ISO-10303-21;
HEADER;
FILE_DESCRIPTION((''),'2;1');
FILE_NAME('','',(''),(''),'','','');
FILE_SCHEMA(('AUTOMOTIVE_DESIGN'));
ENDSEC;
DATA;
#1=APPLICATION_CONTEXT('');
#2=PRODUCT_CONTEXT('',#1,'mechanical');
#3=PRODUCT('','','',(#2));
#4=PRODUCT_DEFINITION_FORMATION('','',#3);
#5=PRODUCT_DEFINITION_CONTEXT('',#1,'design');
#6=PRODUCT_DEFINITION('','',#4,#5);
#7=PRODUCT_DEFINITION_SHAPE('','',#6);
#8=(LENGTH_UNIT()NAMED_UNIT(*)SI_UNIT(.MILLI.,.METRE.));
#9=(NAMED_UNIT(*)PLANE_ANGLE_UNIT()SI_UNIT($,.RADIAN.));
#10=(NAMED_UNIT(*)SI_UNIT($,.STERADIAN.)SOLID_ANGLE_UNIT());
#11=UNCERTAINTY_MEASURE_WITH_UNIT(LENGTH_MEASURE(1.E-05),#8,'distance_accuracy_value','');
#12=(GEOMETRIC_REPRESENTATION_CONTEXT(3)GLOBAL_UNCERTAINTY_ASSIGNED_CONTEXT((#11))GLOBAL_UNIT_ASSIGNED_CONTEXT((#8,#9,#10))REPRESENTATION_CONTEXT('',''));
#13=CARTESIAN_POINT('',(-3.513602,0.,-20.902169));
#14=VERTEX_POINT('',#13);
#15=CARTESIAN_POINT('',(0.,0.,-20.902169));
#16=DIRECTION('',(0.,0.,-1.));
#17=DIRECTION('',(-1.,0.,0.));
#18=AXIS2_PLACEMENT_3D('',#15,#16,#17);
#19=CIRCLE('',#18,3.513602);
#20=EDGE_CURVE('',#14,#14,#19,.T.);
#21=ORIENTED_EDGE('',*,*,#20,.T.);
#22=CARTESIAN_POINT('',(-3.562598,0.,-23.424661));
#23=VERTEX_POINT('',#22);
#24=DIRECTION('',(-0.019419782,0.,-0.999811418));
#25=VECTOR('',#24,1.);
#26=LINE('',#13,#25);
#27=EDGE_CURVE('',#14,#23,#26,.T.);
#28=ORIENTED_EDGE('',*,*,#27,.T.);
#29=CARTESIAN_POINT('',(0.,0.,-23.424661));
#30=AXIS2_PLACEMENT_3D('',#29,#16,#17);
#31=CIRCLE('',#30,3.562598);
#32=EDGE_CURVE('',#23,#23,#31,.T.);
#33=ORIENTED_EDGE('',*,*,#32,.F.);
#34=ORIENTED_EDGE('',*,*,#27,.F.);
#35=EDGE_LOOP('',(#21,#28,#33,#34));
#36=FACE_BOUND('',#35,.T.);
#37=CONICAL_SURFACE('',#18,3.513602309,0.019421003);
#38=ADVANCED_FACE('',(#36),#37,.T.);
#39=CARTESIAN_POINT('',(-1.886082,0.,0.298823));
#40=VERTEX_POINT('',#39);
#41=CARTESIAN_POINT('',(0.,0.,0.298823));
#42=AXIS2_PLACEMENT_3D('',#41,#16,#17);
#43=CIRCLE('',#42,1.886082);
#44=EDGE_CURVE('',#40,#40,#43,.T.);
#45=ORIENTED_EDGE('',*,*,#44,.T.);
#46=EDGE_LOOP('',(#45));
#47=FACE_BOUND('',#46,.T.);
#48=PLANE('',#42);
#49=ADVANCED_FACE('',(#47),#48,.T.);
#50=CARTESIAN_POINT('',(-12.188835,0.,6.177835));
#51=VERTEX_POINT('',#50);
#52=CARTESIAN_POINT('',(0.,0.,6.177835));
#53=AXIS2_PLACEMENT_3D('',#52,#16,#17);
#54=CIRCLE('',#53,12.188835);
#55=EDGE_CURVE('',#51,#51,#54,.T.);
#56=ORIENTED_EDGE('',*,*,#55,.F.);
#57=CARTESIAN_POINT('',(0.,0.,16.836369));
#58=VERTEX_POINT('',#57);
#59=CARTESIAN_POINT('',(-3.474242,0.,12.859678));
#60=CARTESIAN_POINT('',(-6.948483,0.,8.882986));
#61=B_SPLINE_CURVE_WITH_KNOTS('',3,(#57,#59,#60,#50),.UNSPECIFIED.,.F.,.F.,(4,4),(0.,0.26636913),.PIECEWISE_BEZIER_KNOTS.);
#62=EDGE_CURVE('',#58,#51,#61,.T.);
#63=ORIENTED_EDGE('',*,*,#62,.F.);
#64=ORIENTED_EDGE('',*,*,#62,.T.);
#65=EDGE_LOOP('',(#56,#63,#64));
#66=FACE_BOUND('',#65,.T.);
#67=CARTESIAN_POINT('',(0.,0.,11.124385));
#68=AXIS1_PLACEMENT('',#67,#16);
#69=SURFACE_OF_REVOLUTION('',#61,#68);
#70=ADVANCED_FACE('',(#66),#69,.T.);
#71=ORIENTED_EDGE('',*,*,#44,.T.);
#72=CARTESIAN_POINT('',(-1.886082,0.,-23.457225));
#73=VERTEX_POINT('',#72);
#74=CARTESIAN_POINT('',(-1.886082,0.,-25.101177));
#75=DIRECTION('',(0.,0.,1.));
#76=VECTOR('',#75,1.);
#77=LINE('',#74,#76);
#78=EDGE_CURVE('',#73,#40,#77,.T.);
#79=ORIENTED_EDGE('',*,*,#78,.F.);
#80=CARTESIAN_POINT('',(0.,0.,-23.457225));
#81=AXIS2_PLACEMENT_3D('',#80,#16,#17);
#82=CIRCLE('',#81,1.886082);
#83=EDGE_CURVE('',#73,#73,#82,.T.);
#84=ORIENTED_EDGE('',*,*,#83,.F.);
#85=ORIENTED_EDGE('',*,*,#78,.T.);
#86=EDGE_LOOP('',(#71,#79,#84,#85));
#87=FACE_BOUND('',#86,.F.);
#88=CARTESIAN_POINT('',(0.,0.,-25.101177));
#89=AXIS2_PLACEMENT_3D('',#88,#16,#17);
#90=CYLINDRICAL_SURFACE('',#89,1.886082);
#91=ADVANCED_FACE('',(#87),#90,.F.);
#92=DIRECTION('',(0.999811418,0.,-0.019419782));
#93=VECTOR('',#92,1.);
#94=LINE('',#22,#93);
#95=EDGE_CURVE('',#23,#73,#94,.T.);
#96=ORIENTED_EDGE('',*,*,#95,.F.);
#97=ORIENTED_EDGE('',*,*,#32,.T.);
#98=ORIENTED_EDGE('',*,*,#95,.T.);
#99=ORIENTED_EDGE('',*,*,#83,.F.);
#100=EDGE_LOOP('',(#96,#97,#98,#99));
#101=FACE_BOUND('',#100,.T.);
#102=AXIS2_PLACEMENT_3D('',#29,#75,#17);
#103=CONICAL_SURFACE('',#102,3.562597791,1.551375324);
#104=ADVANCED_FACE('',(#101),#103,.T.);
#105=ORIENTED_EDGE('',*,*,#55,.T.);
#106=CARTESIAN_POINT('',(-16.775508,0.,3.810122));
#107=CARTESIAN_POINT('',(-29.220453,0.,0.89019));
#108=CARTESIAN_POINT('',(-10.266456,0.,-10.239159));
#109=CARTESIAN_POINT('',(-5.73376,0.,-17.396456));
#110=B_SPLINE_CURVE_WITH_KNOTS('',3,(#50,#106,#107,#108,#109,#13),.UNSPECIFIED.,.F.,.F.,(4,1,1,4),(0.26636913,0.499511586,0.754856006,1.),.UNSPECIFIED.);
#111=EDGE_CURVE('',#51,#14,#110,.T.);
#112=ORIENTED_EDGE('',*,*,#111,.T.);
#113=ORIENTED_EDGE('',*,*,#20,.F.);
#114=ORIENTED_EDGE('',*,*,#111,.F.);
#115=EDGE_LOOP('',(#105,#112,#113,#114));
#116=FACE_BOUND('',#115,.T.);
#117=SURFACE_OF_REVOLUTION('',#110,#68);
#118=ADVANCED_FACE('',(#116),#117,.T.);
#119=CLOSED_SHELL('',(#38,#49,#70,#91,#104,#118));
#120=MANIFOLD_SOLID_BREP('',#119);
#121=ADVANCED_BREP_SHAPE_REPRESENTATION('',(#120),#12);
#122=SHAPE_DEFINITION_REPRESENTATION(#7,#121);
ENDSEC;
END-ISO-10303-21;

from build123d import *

# Parameters (mm, degrees)
F2_DEPTH = 18.796
F3_DEPTH = 25.4


with BuildPart() as f1:
    # F0 (on Front) → F1 (revolve)
    with BuildSketch(Plane.XZ):
        Polygon((-3.1376469415, 26.0953336054), (0, 26.0995179415), (0, 36.9026255262), (-3.1376469415, 36.9026255262), align=None)
    revolve(axis=Axis((0, 0, 11.1243847059), (0, 0, -1)))

    # F2 (cut): a face of the model
    f2_faces = [f1.faces().sort_by_distance(p)[0] for p in [
        (0, 0, 36.9026255262),
    ]]
    extrude(f2_faces, amount=-F2_DEPTH, mode=Mode.SUBTRACT)


with BuildPart() as f1b:
    # F0 (on Front) → F1, piece 2 (revolve)
    with BuildSketch(Plane.XZ):
        with BuildLine():
            Line((0, 0), (0, 16.8363694102))
            add(Edge.make_bspline(
                [(0, 16.8363694102), (-3.474241628, 12.8596777576), (-6.9484832559, 8.882986105), (-12.1888345, 6.1778346719)],
                knots=[0, 0, 0, 0, 0.2663691303, 0.2663691303, 0.2663691303, 0.2663691303], degree=3))
            add(Edge.make_bspline(
                [(-12.1888345, 6.1778346719), (-16.7755084747, 3.810121689), (-29.2204528037, 0.8901901789), (-10.2664559429, -10.2391590135), (-5.7337599776, -17.3964564632), (-3.5136023088, -20.9021689447)],
                knots=[0.2663691303, 0.2663691303, 0.2663691303, 0.2663691303, 0.4995115859, 0.7548560064, 1, 1, 1, 1], degree=3))
            Line((-3.5136023088, -20.9021689447), (-3.5625977907, -23.424660787))
            Line((-3.5625977907, -23.424660787), (-1.886081649, -23.4572245063))
            Line((-1.886081649, -23.4572245063), (0, -23.4938587097))
            Line((0, -23.4938587097), (0, -20.6523918138))
            Line((0, -20.6523918138), (0, -15.5456149951))
            Line((0, -15.5456149951), (0, -3.8507485297))
            Line((0, -3.8507485297), (0, 0))
        make_face()
        Polygon((0, -23.4938587097), (-1.886081649, -23.4572245063), (-1.886081649, -25.1011773944), (0, -25.1011773944), align=None)
    revolve(axis=Axis((0, 0, 11.1243847059), (0, 0, -1)))

    # F3 (cut): a face of the model
    f3_faces = [f1b.faces().sort_by_distance(p)[0] for p in [
        (0, 0, -25.1011773944),
    ]]
    extrude(f3_faces, amount=-F3_DEPTH, mode=Mode.SUBTRACT)


solid = f1b.part
